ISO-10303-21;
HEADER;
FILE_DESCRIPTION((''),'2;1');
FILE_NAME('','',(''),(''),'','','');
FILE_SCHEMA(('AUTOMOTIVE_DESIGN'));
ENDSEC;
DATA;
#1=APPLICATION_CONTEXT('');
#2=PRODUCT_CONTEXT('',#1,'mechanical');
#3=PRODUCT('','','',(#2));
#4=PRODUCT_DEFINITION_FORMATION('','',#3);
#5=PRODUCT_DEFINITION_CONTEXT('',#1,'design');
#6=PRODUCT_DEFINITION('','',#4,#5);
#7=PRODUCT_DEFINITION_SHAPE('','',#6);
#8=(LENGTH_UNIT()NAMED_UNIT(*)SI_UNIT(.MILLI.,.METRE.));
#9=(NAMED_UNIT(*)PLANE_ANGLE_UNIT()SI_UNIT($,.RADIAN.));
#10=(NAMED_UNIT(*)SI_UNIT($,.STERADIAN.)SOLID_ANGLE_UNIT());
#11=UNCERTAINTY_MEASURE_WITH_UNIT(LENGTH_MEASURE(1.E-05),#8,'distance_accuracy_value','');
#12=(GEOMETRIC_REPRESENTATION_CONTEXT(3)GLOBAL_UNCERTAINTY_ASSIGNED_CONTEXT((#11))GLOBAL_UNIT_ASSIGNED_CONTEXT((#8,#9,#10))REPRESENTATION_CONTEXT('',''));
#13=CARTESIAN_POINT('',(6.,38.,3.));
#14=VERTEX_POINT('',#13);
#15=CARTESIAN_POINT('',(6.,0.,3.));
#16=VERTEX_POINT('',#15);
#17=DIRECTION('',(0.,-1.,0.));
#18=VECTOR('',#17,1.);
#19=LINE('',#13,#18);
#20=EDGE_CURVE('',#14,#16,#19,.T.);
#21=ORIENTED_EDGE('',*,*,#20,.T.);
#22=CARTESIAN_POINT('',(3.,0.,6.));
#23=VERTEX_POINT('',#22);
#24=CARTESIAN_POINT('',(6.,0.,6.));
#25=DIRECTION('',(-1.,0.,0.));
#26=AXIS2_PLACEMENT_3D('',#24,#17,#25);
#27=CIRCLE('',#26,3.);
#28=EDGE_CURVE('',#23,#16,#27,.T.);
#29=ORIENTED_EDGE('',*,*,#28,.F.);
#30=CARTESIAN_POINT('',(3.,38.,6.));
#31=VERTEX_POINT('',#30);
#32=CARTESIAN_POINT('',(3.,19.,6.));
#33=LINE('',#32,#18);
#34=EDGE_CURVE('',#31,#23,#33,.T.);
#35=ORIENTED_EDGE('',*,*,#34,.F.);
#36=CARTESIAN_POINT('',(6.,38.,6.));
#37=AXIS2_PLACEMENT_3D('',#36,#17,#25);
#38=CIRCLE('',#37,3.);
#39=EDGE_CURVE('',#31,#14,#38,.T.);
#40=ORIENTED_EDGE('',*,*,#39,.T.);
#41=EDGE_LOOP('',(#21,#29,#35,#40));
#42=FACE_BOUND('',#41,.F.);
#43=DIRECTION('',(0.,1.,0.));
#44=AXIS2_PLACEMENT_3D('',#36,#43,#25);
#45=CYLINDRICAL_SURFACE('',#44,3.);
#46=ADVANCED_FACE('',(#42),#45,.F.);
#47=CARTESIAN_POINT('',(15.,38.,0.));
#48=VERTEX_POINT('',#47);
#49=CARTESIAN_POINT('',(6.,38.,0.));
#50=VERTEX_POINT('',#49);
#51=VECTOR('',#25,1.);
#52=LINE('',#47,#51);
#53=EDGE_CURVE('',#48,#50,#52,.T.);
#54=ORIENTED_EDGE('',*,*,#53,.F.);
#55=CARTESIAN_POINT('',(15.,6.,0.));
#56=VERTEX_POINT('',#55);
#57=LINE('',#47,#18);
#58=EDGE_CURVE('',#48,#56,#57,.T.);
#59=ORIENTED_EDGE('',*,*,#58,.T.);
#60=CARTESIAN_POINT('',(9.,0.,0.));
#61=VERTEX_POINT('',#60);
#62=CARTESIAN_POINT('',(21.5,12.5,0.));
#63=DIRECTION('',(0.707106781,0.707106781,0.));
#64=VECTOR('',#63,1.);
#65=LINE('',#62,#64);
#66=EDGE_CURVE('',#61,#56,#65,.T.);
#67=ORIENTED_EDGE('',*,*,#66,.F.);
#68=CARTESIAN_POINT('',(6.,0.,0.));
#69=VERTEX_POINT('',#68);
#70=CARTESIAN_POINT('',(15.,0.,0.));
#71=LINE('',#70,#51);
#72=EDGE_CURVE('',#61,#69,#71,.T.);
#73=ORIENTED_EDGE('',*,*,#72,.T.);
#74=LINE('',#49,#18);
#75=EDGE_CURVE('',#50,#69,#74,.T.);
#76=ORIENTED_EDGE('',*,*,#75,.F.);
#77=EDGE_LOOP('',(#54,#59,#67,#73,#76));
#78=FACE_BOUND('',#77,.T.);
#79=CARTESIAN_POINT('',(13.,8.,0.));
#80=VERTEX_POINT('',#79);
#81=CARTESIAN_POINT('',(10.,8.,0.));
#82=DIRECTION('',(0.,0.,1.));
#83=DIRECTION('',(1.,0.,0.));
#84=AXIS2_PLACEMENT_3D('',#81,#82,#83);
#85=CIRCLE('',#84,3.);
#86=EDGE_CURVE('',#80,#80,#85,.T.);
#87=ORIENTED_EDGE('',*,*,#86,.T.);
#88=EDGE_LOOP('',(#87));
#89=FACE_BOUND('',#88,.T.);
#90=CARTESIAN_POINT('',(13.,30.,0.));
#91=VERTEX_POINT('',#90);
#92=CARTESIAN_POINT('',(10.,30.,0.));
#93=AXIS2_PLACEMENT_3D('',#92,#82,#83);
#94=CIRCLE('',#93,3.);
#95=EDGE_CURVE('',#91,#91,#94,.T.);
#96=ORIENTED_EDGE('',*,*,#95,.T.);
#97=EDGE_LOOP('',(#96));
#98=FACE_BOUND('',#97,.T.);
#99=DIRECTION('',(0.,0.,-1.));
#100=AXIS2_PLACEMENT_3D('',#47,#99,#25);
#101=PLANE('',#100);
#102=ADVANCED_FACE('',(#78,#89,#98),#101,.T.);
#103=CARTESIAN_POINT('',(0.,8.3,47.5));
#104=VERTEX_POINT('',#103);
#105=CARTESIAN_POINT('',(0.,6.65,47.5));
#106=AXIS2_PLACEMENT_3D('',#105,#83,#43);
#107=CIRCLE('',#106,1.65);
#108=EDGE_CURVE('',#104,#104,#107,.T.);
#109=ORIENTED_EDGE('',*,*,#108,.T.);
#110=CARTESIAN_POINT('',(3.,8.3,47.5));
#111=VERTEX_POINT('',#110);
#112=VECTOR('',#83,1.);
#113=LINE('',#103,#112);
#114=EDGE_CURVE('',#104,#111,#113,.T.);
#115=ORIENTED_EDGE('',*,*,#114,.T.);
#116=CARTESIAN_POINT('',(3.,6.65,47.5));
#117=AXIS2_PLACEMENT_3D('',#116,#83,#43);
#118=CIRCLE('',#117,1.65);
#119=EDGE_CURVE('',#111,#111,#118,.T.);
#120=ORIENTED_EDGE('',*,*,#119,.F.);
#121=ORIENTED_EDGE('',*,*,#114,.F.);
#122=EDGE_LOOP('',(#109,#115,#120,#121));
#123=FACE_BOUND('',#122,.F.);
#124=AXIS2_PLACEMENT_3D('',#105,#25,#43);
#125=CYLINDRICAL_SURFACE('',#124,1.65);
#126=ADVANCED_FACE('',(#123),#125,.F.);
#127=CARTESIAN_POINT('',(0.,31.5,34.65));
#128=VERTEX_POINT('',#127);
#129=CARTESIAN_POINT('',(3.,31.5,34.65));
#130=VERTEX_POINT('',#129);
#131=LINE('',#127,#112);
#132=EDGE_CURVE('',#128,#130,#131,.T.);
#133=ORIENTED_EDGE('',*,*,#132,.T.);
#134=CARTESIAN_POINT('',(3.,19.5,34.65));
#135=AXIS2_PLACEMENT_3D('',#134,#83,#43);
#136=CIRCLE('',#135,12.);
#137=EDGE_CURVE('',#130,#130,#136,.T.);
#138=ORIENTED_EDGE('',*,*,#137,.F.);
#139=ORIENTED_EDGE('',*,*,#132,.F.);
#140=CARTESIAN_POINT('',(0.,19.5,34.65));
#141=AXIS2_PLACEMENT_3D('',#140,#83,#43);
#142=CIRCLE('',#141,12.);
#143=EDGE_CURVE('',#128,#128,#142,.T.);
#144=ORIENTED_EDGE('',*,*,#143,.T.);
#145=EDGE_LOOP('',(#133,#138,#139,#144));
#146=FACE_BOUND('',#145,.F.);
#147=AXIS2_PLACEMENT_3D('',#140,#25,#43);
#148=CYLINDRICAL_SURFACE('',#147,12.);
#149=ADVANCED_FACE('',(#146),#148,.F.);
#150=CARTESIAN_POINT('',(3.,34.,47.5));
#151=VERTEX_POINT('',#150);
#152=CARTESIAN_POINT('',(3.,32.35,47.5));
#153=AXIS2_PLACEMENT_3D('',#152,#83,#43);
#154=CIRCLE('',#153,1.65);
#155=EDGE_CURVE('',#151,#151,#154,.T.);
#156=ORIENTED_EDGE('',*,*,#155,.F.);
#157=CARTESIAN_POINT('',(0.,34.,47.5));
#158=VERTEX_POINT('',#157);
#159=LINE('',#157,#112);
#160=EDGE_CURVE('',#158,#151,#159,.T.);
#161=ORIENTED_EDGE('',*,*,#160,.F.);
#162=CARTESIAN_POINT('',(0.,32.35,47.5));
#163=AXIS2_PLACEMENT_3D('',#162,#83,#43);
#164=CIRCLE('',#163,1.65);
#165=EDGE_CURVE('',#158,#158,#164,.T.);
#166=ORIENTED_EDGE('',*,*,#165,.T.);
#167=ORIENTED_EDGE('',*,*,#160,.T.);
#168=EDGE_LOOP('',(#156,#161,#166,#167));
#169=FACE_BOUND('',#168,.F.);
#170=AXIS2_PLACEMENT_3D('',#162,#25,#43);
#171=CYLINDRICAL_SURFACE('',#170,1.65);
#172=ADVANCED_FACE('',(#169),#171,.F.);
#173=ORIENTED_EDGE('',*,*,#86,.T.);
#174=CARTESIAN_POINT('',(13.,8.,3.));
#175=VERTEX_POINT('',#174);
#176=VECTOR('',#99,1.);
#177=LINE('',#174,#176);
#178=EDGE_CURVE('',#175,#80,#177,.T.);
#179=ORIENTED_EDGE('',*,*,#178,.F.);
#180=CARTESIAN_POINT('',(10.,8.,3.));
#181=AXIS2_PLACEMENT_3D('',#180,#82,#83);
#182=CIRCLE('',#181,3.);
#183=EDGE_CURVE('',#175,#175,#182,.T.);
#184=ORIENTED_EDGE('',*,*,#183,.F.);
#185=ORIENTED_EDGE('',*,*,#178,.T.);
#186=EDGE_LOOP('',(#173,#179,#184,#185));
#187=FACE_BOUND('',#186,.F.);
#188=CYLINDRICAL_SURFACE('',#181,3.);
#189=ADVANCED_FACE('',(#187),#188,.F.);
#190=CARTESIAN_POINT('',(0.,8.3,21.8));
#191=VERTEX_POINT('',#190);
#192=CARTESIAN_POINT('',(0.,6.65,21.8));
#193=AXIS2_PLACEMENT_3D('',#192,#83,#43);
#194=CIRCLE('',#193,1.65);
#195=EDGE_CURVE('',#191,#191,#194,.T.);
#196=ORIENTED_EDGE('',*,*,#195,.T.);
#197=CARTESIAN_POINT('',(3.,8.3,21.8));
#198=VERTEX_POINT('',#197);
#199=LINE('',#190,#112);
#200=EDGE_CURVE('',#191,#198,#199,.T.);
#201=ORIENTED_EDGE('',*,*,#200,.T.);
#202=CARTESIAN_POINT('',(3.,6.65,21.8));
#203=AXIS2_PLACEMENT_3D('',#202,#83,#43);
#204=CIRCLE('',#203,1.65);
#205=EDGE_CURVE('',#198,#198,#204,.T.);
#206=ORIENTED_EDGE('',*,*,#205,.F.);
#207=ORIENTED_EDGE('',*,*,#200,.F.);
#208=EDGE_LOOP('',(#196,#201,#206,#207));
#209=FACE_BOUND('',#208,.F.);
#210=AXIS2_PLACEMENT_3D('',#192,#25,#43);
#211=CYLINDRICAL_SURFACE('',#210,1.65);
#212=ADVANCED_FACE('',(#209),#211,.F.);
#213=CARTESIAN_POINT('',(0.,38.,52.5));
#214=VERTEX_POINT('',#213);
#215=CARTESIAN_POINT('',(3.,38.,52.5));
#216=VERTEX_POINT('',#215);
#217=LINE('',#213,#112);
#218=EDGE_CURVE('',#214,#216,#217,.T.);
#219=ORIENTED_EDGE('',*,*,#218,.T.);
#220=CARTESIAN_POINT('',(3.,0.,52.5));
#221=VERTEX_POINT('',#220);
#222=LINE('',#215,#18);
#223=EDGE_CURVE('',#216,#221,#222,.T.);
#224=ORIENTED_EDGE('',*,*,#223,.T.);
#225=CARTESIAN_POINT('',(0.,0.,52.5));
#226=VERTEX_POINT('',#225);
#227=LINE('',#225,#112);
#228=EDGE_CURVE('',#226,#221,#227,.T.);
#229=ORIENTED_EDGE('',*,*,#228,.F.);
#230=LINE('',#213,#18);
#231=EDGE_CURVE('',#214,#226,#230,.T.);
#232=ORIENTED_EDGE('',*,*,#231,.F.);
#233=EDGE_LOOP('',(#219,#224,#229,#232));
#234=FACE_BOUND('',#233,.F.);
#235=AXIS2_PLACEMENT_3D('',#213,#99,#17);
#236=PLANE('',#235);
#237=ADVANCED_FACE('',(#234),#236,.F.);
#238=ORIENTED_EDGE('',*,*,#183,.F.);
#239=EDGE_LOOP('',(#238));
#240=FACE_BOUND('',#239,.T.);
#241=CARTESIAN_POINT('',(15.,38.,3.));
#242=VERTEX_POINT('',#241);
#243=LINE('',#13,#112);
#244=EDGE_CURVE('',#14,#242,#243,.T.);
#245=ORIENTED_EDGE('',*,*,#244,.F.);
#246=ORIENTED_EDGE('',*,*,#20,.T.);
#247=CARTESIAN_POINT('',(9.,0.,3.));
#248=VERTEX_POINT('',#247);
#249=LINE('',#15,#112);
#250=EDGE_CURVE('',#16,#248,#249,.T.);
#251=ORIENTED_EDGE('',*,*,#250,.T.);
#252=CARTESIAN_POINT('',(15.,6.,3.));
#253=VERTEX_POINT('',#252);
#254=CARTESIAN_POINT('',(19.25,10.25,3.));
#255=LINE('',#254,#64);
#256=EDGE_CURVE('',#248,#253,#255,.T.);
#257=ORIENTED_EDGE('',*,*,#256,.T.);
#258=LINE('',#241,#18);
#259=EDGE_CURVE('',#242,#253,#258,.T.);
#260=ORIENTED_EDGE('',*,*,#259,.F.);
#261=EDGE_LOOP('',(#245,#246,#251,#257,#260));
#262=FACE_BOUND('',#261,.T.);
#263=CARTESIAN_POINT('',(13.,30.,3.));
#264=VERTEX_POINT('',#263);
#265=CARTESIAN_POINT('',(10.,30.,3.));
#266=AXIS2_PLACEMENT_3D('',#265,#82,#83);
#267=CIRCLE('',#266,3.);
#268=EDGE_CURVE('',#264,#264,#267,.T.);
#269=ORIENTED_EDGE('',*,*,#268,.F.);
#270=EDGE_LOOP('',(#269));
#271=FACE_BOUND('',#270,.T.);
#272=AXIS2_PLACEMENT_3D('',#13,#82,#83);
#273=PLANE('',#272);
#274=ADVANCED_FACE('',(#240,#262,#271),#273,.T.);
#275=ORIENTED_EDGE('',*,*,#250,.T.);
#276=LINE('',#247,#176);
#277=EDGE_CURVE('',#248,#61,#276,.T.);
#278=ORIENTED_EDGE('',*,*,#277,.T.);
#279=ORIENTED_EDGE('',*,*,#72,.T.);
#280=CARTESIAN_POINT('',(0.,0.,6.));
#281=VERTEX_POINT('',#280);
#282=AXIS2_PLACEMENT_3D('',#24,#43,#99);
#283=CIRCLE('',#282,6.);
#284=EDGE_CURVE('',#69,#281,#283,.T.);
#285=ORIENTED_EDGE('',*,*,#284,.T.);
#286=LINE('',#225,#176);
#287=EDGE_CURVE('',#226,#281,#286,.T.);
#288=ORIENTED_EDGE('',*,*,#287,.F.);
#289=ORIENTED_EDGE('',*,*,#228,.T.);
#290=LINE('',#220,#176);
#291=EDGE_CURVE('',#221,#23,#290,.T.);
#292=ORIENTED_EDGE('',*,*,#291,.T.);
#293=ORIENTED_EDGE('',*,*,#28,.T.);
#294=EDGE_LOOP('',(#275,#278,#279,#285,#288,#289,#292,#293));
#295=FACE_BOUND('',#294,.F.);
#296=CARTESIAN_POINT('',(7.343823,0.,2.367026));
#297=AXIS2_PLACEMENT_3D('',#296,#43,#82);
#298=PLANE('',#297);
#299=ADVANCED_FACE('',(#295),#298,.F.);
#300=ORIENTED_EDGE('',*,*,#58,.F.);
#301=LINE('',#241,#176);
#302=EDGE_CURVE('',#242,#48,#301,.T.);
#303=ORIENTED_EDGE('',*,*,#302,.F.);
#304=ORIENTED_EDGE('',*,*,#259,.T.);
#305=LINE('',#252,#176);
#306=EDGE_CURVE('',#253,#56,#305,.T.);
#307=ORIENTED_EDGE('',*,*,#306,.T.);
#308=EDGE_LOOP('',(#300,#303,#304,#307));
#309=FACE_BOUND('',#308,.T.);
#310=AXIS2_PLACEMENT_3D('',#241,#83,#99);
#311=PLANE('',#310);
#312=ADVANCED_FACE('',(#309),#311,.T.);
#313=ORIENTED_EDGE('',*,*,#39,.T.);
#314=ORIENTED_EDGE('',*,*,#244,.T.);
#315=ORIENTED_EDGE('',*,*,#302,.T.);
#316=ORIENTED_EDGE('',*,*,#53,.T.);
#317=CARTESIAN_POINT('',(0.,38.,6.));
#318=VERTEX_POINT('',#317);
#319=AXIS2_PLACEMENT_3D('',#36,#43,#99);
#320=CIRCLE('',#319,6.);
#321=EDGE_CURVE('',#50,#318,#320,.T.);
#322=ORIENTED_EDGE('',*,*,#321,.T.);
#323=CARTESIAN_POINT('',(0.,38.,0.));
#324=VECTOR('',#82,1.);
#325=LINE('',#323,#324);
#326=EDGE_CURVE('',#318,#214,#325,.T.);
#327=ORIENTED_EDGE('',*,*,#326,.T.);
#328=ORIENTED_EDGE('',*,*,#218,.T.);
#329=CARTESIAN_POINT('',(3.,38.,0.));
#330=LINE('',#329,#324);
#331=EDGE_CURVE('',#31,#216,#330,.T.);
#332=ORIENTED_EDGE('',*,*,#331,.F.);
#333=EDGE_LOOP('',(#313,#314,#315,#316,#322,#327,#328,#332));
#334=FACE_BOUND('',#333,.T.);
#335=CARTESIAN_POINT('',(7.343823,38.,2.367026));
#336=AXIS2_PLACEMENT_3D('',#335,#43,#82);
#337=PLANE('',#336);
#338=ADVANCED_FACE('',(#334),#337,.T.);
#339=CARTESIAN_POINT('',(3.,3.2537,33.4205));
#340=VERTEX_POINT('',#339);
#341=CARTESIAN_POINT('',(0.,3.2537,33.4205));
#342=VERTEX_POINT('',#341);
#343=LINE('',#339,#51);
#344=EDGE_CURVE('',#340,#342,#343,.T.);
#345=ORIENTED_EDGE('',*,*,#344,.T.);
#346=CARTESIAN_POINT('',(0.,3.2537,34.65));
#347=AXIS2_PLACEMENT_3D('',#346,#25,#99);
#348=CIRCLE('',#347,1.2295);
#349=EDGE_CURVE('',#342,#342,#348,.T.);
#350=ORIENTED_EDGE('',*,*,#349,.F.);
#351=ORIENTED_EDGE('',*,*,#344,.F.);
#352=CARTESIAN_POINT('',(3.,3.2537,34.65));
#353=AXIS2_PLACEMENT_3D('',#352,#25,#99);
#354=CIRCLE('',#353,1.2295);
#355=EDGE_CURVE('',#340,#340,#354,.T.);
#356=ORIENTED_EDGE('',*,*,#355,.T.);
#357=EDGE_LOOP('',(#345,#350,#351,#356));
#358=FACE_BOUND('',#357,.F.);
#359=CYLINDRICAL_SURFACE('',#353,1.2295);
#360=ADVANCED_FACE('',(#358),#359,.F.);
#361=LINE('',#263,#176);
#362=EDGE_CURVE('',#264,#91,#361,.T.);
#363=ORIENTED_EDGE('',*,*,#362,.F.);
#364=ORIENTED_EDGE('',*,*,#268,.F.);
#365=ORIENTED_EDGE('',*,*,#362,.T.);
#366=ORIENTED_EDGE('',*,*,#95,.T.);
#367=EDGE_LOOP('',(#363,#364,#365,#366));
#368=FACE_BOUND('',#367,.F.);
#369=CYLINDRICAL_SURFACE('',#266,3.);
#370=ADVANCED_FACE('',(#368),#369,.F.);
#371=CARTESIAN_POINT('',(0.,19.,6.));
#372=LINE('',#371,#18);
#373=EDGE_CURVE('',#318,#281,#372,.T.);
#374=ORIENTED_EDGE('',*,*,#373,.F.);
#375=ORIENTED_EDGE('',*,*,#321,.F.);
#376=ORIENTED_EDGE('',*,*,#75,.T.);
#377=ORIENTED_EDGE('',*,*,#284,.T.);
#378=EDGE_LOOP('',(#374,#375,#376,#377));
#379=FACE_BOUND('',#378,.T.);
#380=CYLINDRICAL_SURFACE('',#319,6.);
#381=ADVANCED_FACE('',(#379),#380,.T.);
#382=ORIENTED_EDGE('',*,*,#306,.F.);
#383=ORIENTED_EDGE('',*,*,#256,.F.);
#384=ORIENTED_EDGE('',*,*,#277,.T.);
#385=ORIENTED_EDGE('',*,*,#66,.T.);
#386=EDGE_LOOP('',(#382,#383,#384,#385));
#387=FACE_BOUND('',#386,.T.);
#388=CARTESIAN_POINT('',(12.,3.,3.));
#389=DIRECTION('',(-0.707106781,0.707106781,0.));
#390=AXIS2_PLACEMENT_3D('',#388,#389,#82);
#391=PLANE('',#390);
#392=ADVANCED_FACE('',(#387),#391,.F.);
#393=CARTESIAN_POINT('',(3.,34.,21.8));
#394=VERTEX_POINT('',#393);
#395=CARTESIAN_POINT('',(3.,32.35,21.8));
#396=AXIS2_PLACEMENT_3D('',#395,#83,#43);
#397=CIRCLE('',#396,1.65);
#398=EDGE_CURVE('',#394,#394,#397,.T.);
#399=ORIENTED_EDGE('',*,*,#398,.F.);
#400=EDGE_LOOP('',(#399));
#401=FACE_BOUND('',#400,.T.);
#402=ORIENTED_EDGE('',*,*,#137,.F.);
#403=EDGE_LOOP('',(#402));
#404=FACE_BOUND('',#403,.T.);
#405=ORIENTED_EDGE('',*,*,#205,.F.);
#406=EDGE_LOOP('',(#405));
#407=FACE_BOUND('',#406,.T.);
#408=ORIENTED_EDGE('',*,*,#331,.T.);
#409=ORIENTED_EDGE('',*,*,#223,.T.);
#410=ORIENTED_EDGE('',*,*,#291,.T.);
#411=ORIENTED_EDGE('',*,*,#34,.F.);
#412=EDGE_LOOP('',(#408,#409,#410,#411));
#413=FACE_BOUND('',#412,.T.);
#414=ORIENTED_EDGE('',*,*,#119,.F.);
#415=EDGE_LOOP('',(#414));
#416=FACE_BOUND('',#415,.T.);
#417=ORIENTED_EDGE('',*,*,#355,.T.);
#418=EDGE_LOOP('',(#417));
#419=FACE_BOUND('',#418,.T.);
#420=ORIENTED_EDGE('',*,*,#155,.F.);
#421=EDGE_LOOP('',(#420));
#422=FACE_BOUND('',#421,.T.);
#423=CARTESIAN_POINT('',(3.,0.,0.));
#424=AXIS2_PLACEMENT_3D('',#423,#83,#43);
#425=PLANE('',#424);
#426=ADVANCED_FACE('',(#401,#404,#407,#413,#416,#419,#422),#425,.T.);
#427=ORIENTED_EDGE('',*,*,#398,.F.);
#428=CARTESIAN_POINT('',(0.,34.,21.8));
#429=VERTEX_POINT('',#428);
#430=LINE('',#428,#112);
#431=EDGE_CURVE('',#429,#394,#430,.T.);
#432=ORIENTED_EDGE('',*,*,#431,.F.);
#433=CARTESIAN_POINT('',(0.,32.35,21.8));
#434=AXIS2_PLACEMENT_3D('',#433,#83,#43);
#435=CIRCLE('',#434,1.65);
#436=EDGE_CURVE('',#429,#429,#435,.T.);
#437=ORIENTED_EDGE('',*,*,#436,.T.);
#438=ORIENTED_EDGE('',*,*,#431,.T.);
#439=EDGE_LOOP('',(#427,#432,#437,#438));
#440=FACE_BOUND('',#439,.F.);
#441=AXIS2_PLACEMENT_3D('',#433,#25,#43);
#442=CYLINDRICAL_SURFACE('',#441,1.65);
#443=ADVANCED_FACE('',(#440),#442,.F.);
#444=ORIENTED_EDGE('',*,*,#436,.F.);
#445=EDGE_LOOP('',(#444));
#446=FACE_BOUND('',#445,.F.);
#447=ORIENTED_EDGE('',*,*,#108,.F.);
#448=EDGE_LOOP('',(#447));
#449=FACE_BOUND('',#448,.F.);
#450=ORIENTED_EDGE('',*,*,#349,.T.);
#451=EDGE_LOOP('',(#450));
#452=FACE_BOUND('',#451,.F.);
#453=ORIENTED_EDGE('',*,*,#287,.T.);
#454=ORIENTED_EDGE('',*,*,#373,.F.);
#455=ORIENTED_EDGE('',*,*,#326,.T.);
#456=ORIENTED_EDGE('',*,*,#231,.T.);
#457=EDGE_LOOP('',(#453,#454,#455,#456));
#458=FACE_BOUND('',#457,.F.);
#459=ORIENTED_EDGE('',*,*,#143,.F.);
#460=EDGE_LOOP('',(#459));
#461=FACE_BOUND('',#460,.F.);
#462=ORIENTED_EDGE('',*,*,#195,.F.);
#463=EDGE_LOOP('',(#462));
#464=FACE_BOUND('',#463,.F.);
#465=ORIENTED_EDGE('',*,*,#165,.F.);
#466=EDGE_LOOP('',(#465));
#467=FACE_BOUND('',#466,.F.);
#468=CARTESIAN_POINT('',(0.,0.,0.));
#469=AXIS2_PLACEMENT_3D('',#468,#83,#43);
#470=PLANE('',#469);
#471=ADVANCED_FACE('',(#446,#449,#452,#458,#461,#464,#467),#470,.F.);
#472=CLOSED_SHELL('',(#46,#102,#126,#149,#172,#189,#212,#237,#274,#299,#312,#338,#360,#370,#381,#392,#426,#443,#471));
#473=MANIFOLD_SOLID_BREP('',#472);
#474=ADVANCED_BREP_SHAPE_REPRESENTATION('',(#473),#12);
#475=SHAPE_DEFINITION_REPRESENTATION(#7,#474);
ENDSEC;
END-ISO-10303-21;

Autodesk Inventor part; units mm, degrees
ref_plane "YZ Plane" through (0, 0, 0) normal (1, 0, 0) x (0, 1, 0)
ref_plane "XZ Plane" through (0, 0, 0) normal (0, 1, 0) x (-1, 0, 0)
ref_plane "XY Plane" through (0, 0, 0) normal (0, 0, 1) x (1, 0, 0)
sketch "Szkic1" plane through (0, 0, 0) normal (1, 0, 0) x (0, 1, 0)
  line L0 (0, 0) -> (38, 0)
  line L1 (38, 0) -> (38, 52.5)
  line L2 (38, 52.5) -> (0, 52.5)
  line L3 (0, 52.5) -> (0, 0)
  circle A0 centre (19.5, 34.65) radius 12
  circle A1 centre (6.65, 47.5) radius 1.65
  circle A2 centre (32.35, 47.5) radius 1.65
  circle A3 centre (6.65, 21.8) radius 1.65
  circle A4 centre (32.35, 21.8) radius 1.65
  dimension "d0" = 38
  dimension "d1" = 52.5
  dimension "d2" = 24
  dimension "d3" = 17.85
  dimension "d5" = 3.3
  dimension "d6" = 3.3
  dimension "d7" = 3.3
  dimension "d8" = 3.3
  dimension "d9" = 25.7
  dimension "d10" = 25.7
  dimension "d11" = 25.7
  dimension "d12" = 25.7
  dimension "d13" = 5
  dimension "d14" = 5
  dimension "d15" = 12.85
  dimension "d16" = 12.85
  dimension "d38" = 18.5
extrude "Płyta1" add sketch "Szkic1" along normal blind 3
sketch "Szkic2" plane through (0, 38, 3) normal (0, 0, -1) x (-1, 0, 0)
  line L0 (0, -38) -> (0, 0)
  line L1 (0, 0) -> (-15, 0)
  line L2 (-15, 0) -> (-15, -38)
  line L3 (-15, -38) -> (0, -38)
edge flange "Kołnierz1" height 15 angle 90 thickness 3 bend radius 3 thickness toward (0, 0, -1) relief tear relief width 3 relief depth 1.5 edges at (3, 19, 0) wall of the first edge with corners at (0, 0, 3) (0, 38, 3) (15, 38, 3) (15, 0, 3)
bend "Zagięcie1"
corner "Narożnik1"
sketch "Szkic3" plane through (15, 0, 3) normal (0, 0, 1) x (1, 0, 0)
  circle A0 centre (-5, 8) radius 3
  circle A1 centre (-5, 30) radius 3
  line L0 (-9, 38) -> (0, 38) projected
  line L1 (-9, 0) -> (0, 0) projected
  line L2 (0, 0) -> (0, 38) projected
  point P0 (-15, 0)
  dimension "d30" = 6
  dimension "d31" = 6
  dimension "d32" = 8
  dimension "d33" = 8
  dimension "d34" = 5
  dimension "d35" = 5
extrude "Wytnij1" cut sketch "Szkic3" against normal blind 3
chamfer "Fazowanie narożnika1" distance 6 angle 45 1 edges at (15, 0, 1.5)
sketch "Szkic4" plane through (3, 0, 0) normal (1, 0, 0) x (0, 0, -1)
  point P0 (-34.65, 3.2537)
hole "Otwór1" at (3, 3.2537, 34.65) direction (-1, 0, 0) diameter 2.459 depth 3.7451 tip angle 120 thread size "M3x0.5" class "6H" standard "ISO Metric profile"
equation "\"d36\" = Grubość"
equation "\"d19\" = Grubość"
equation "\"d20\" = SzerokośćGięciaPodcięcia"
equation "\"d21\" = GłębokośćGięciaPodcięcia"
equation "\"d22\" = MinimalnaPozostałość"
equation "\"d23\" = PromieńPrzejścia"
equation "\"d26\" = PromieńGięcia"
equation "\"d27\" = RozmiarPodcięciaNarożnika"
equation "\"d28\" = Wielk_odstępu"
equation "\"d29\" = Rozmiar_promienia_Jacobiego"
equation "\"PromieńGięcia\" = Grubość"
equation "\"SzerokośćGięciaPodcięcia\" = Grubość"
equation "\"GłębokośćGięciaPodcięcia\" = 0.5 * Grubość"
equation "\"RozmiarPodcięciaNarożnika\" = 4 * Grubość"
equation "\"MinimalnaPozostałość\" = 2 * Grubość"
equation "\"PromieńPrzejścia\" = PromieńGięcia"
equation "\"Rozmiar_promienia_Jacobiego\" = PromieńGięcia"
equation "\"Wielk_odstępu\" = Grubość"
equation "\"Grubość\" = 3"
properties part number "RR-PCSS-MSK" material "Stal nierdzewna"
